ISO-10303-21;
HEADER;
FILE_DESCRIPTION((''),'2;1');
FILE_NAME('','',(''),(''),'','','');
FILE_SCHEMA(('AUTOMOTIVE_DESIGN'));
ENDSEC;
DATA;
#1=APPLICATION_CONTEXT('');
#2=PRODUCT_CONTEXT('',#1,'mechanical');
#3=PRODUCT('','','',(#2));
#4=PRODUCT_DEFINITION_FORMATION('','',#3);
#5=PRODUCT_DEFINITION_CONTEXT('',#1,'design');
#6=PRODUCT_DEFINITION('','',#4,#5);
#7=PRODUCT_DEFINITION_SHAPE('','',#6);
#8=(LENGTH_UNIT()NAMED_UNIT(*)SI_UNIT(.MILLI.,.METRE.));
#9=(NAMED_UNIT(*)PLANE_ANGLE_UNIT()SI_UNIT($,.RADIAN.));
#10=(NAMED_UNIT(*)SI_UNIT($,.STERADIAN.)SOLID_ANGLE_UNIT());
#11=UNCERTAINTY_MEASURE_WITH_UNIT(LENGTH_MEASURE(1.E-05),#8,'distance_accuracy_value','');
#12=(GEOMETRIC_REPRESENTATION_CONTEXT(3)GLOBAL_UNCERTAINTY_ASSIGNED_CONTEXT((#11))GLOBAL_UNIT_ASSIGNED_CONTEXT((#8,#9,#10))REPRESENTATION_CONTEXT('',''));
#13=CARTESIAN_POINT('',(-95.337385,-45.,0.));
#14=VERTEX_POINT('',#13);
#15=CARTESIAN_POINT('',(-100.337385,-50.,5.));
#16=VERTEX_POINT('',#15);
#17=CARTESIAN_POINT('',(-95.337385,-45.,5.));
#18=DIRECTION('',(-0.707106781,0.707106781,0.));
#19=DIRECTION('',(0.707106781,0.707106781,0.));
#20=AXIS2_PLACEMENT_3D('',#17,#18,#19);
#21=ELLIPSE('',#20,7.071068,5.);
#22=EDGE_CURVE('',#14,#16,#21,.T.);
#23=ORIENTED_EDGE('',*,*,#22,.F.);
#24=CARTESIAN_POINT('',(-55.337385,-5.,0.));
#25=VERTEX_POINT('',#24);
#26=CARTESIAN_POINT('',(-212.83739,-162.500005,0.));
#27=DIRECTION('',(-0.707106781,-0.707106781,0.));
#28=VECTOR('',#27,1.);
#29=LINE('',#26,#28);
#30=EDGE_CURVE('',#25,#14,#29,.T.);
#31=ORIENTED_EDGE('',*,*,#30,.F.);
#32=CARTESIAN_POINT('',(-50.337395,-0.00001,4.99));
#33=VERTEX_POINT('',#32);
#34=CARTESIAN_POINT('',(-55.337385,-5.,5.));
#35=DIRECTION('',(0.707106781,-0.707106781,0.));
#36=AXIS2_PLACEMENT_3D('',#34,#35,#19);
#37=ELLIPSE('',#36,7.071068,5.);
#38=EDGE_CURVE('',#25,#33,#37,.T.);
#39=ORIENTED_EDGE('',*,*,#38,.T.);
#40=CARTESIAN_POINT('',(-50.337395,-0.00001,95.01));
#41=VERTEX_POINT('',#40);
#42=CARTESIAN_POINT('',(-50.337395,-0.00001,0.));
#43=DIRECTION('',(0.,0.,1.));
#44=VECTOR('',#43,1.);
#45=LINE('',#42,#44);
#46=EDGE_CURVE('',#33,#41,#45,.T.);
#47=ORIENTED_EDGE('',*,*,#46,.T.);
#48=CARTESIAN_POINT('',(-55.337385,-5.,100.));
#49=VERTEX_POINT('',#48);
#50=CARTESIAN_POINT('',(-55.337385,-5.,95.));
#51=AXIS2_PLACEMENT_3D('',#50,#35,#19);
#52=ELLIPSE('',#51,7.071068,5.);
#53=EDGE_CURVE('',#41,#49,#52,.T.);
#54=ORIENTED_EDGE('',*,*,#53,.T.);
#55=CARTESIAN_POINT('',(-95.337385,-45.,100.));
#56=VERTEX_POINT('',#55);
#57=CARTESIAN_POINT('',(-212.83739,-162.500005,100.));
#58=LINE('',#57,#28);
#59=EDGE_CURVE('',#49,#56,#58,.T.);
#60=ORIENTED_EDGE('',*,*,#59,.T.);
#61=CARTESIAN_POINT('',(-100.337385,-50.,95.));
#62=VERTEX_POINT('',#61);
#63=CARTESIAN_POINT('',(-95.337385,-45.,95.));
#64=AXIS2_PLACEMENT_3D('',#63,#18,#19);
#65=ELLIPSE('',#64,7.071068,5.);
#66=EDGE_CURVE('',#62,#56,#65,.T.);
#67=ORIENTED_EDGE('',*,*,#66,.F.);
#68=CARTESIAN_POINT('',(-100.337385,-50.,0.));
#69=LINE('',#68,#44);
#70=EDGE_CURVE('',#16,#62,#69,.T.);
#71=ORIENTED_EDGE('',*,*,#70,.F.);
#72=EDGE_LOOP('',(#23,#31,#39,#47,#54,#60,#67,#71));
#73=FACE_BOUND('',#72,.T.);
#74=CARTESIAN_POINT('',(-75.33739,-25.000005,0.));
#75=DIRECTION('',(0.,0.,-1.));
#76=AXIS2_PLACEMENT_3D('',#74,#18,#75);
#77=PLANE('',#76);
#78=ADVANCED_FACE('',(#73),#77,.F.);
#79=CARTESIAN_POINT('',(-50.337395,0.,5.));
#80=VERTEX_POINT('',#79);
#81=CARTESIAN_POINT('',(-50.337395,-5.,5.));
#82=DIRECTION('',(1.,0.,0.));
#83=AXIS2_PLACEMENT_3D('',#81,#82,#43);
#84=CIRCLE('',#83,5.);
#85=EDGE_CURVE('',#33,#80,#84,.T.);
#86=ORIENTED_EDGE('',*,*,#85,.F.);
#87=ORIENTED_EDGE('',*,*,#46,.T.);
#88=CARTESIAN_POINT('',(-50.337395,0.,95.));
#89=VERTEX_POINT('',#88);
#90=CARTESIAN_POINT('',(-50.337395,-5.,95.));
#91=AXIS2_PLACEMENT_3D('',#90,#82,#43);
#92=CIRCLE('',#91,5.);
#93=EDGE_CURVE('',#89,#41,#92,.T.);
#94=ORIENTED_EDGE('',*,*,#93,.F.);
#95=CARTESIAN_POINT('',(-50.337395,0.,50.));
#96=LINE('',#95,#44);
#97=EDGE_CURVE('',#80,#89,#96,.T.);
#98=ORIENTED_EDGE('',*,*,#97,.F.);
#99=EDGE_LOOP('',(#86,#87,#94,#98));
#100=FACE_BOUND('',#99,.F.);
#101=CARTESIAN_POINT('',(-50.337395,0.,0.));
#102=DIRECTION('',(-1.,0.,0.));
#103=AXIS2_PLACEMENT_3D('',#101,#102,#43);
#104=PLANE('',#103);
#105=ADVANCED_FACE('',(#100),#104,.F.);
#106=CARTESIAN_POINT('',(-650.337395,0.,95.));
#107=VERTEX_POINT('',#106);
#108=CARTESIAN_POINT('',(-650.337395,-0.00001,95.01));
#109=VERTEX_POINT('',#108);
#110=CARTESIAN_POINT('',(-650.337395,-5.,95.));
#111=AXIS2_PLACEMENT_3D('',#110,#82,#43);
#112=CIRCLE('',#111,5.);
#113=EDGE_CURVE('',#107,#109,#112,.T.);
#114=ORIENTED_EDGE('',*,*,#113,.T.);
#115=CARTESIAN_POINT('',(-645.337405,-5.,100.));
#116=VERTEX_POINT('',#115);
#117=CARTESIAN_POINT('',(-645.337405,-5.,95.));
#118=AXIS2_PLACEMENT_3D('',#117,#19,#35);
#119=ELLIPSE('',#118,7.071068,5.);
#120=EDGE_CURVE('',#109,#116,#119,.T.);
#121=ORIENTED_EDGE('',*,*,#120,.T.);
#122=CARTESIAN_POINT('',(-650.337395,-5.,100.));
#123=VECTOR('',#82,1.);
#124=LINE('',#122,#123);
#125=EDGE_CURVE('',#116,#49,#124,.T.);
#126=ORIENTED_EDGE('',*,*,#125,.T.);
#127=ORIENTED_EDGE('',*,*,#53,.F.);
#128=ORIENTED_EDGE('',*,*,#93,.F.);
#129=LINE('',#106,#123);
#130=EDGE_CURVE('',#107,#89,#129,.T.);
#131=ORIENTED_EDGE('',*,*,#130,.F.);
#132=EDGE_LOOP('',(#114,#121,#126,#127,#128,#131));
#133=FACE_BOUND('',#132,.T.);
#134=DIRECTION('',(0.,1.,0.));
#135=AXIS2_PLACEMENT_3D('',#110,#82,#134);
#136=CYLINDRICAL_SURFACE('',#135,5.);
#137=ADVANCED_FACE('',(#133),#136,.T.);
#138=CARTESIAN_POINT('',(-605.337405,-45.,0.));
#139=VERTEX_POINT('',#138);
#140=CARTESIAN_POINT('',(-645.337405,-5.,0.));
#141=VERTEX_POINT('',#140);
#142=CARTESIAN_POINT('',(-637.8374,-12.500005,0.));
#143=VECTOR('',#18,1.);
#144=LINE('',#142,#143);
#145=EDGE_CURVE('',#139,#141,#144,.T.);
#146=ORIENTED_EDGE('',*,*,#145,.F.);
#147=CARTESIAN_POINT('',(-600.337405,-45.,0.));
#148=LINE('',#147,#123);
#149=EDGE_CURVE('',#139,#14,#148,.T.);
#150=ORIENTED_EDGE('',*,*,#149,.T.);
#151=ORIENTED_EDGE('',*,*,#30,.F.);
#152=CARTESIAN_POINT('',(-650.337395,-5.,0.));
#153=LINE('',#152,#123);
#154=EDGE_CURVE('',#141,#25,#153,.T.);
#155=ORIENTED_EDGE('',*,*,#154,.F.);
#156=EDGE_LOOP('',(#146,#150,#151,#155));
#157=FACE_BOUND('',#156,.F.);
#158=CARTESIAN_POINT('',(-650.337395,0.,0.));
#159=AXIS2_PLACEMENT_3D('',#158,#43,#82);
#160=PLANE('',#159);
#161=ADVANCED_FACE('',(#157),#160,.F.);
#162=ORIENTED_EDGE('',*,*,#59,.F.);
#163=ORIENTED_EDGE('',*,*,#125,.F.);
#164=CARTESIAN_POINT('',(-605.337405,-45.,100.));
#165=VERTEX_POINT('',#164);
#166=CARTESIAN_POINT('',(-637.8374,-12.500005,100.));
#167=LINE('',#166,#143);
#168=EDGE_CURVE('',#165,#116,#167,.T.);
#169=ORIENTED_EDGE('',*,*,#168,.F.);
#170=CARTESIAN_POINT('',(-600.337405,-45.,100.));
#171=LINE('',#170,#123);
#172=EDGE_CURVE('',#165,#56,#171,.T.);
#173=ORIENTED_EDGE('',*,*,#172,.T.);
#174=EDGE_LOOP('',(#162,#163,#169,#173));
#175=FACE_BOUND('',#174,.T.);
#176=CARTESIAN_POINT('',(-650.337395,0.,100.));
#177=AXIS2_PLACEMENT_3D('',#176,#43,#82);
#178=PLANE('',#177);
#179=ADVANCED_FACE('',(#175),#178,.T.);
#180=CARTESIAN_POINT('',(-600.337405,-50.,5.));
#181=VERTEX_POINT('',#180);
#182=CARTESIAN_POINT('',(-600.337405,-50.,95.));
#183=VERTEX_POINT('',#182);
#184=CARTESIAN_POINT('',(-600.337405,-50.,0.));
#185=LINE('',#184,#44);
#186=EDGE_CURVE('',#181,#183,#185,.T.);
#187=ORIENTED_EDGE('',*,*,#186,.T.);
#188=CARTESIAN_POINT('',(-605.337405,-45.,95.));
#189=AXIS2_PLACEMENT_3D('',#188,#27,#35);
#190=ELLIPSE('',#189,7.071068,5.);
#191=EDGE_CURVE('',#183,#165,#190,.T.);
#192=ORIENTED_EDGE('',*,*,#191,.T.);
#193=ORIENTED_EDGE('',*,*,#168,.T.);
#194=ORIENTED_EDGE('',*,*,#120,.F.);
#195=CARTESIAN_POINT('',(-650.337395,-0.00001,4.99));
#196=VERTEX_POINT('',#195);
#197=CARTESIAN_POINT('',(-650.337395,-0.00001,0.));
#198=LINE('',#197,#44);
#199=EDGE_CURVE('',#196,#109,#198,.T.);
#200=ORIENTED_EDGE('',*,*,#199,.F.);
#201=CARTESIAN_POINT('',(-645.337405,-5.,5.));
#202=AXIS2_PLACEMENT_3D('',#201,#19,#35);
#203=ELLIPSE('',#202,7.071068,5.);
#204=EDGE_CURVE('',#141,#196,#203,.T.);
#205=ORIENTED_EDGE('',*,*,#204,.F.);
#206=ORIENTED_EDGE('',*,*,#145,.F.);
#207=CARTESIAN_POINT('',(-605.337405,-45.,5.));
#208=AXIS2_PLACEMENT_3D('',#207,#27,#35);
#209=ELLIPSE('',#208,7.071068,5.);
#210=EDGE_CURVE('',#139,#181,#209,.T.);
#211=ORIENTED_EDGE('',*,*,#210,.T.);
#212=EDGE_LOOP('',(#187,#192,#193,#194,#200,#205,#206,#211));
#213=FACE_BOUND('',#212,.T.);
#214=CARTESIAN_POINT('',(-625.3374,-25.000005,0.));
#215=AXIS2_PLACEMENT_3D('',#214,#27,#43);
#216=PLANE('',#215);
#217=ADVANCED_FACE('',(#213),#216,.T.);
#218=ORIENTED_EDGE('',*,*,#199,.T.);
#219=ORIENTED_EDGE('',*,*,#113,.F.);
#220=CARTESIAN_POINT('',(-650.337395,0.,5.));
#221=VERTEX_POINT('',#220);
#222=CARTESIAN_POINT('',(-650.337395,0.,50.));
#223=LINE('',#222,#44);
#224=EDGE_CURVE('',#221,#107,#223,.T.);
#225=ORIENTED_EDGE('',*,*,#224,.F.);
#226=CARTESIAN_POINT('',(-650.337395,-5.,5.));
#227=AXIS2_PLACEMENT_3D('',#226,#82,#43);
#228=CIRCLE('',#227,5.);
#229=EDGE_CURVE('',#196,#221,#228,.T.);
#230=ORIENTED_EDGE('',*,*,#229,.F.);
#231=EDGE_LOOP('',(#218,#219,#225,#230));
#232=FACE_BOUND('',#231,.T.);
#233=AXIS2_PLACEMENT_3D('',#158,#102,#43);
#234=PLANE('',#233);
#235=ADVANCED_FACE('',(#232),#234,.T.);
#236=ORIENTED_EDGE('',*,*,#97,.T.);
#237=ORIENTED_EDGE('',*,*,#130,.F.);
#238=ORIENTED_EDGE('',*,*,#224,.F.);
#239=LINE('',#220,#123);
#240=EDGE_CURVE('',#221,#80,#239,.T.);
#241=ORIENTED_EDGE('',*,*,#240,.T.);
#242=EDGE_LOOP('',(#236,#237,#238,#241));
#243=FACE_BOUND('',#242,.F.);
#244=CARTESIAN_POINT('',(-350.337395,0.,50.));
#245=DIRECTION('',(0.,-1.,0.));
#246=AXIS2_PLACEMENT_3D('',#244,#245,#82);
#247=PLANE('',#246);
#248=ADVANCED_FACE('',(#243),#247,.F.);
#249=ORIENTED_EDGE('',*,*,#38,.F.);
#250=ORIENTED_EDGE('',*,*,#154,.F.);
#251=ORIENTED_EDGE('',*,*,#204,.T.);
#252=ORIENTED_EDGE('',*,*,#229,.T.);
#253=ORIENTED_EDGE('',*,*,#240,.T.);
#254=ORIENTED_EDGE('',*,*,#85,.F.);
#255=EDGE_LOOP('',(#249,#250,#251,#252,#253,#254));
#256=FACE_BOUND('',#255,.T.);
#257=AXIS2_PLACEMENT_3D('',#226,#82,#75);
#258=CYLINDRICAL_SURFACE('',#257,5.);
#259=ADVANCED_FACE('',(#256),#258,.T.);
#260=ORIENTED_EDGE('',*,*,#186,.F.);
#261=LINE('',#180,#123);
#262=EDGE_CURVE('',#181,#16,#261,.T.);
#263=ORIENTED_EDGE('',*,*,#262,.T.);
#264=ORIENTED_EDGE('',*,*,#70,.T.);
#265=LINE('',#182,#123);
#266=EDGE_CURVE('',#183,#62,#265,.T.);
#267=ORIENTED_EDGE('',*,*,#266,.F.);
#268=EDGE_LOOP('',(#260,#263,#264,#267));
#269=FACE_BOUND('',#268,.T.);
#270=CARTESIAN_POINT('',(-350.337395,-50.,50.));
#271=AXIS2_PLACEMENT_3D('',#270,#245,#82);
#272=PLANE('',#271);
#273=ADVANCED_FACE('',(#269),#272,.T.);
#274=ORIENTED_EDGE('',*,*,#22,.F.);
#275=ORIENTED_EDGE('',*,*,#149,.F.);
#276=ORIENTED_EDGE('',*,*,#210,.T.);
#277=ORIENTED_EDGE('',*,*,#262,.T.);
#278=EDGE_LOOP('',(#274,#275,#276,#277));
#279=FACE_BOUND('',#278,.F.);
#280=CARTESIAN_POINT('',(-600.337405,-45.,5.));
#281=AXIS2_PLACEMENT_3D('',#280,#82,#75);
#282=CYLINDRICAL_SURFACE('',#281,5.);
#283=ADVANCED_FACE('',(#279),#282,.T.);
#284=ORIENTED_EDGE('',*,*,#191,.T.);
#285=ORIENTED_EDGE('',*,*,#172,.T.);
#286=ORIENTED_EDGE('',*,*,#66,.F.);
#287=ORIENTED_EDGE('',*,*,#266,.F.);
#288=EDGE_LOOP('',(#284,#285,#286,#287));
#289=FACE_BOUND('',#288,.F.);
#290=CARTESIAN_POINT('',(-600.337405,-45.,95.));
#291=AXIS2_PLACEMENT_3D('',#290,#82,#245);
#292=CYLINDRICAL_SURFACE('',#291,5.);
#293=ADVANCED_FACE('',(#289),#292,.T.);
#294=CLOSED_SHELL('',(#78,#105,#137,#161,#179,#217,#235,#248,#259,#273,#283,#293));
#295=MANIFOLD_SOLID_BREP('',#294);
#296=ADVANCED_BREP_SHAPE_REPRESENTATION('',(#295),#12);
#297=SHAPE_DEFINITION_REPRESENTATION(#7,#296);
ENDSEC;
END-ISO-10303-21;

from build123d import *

# Parameters (mm, degrees)
F0_W     = 600
F0_H     = 100
F3_DEPTH = 50
F1_SIZE  = 49.99999
F4_SIZE  = 49.99999
F2_R     = 5


# Not quite as in the source:
# - a fillet or chamfer is up to 0.001 mm smaller than in the source, because OpenCascade refuses the exact size


with BuildPart() as f3:
    # F0 (on Front) → F3 (new body)
    with BuildSketch(Plane.XZ):
        with Locations((-350.3373948519, 50)):
            Rectangle(F0_W, F0_H)
    extrude(amount=F3_DEPTH)

    # F1 (size 50 in the source; OpenCascade refuses exactly that, so slightly less here)
    f1_edges = [f3.edges().sort_by_distance(p)[0] for p in [
        (-50.337395, -50, 50),
    ]]
    chamfer(f1_edges, length=F1_SIZE)

    # F4 (size 50 in the source; OpenCascade refuses exactly that, so slightly less here)
    f4_edges = [f3.edges().sort_by_distance(p)[0] for p in [
        (-650.337395, -50, 50),
    ]]
    chamfer(f4_edges, length=F4_SIZE)

    # F2
    f2_edges = [f3.edges().sort_by_distance(p)[0] for p in [
        (-350.337395, -50, 0),
        (-350.337395, -50, 100),
        (-350.337395, 0, 100),
        (-350.337395, 0, 0),
    ]]
    fillet(f2_edges, radius=F2_R)


solid = f3.part
